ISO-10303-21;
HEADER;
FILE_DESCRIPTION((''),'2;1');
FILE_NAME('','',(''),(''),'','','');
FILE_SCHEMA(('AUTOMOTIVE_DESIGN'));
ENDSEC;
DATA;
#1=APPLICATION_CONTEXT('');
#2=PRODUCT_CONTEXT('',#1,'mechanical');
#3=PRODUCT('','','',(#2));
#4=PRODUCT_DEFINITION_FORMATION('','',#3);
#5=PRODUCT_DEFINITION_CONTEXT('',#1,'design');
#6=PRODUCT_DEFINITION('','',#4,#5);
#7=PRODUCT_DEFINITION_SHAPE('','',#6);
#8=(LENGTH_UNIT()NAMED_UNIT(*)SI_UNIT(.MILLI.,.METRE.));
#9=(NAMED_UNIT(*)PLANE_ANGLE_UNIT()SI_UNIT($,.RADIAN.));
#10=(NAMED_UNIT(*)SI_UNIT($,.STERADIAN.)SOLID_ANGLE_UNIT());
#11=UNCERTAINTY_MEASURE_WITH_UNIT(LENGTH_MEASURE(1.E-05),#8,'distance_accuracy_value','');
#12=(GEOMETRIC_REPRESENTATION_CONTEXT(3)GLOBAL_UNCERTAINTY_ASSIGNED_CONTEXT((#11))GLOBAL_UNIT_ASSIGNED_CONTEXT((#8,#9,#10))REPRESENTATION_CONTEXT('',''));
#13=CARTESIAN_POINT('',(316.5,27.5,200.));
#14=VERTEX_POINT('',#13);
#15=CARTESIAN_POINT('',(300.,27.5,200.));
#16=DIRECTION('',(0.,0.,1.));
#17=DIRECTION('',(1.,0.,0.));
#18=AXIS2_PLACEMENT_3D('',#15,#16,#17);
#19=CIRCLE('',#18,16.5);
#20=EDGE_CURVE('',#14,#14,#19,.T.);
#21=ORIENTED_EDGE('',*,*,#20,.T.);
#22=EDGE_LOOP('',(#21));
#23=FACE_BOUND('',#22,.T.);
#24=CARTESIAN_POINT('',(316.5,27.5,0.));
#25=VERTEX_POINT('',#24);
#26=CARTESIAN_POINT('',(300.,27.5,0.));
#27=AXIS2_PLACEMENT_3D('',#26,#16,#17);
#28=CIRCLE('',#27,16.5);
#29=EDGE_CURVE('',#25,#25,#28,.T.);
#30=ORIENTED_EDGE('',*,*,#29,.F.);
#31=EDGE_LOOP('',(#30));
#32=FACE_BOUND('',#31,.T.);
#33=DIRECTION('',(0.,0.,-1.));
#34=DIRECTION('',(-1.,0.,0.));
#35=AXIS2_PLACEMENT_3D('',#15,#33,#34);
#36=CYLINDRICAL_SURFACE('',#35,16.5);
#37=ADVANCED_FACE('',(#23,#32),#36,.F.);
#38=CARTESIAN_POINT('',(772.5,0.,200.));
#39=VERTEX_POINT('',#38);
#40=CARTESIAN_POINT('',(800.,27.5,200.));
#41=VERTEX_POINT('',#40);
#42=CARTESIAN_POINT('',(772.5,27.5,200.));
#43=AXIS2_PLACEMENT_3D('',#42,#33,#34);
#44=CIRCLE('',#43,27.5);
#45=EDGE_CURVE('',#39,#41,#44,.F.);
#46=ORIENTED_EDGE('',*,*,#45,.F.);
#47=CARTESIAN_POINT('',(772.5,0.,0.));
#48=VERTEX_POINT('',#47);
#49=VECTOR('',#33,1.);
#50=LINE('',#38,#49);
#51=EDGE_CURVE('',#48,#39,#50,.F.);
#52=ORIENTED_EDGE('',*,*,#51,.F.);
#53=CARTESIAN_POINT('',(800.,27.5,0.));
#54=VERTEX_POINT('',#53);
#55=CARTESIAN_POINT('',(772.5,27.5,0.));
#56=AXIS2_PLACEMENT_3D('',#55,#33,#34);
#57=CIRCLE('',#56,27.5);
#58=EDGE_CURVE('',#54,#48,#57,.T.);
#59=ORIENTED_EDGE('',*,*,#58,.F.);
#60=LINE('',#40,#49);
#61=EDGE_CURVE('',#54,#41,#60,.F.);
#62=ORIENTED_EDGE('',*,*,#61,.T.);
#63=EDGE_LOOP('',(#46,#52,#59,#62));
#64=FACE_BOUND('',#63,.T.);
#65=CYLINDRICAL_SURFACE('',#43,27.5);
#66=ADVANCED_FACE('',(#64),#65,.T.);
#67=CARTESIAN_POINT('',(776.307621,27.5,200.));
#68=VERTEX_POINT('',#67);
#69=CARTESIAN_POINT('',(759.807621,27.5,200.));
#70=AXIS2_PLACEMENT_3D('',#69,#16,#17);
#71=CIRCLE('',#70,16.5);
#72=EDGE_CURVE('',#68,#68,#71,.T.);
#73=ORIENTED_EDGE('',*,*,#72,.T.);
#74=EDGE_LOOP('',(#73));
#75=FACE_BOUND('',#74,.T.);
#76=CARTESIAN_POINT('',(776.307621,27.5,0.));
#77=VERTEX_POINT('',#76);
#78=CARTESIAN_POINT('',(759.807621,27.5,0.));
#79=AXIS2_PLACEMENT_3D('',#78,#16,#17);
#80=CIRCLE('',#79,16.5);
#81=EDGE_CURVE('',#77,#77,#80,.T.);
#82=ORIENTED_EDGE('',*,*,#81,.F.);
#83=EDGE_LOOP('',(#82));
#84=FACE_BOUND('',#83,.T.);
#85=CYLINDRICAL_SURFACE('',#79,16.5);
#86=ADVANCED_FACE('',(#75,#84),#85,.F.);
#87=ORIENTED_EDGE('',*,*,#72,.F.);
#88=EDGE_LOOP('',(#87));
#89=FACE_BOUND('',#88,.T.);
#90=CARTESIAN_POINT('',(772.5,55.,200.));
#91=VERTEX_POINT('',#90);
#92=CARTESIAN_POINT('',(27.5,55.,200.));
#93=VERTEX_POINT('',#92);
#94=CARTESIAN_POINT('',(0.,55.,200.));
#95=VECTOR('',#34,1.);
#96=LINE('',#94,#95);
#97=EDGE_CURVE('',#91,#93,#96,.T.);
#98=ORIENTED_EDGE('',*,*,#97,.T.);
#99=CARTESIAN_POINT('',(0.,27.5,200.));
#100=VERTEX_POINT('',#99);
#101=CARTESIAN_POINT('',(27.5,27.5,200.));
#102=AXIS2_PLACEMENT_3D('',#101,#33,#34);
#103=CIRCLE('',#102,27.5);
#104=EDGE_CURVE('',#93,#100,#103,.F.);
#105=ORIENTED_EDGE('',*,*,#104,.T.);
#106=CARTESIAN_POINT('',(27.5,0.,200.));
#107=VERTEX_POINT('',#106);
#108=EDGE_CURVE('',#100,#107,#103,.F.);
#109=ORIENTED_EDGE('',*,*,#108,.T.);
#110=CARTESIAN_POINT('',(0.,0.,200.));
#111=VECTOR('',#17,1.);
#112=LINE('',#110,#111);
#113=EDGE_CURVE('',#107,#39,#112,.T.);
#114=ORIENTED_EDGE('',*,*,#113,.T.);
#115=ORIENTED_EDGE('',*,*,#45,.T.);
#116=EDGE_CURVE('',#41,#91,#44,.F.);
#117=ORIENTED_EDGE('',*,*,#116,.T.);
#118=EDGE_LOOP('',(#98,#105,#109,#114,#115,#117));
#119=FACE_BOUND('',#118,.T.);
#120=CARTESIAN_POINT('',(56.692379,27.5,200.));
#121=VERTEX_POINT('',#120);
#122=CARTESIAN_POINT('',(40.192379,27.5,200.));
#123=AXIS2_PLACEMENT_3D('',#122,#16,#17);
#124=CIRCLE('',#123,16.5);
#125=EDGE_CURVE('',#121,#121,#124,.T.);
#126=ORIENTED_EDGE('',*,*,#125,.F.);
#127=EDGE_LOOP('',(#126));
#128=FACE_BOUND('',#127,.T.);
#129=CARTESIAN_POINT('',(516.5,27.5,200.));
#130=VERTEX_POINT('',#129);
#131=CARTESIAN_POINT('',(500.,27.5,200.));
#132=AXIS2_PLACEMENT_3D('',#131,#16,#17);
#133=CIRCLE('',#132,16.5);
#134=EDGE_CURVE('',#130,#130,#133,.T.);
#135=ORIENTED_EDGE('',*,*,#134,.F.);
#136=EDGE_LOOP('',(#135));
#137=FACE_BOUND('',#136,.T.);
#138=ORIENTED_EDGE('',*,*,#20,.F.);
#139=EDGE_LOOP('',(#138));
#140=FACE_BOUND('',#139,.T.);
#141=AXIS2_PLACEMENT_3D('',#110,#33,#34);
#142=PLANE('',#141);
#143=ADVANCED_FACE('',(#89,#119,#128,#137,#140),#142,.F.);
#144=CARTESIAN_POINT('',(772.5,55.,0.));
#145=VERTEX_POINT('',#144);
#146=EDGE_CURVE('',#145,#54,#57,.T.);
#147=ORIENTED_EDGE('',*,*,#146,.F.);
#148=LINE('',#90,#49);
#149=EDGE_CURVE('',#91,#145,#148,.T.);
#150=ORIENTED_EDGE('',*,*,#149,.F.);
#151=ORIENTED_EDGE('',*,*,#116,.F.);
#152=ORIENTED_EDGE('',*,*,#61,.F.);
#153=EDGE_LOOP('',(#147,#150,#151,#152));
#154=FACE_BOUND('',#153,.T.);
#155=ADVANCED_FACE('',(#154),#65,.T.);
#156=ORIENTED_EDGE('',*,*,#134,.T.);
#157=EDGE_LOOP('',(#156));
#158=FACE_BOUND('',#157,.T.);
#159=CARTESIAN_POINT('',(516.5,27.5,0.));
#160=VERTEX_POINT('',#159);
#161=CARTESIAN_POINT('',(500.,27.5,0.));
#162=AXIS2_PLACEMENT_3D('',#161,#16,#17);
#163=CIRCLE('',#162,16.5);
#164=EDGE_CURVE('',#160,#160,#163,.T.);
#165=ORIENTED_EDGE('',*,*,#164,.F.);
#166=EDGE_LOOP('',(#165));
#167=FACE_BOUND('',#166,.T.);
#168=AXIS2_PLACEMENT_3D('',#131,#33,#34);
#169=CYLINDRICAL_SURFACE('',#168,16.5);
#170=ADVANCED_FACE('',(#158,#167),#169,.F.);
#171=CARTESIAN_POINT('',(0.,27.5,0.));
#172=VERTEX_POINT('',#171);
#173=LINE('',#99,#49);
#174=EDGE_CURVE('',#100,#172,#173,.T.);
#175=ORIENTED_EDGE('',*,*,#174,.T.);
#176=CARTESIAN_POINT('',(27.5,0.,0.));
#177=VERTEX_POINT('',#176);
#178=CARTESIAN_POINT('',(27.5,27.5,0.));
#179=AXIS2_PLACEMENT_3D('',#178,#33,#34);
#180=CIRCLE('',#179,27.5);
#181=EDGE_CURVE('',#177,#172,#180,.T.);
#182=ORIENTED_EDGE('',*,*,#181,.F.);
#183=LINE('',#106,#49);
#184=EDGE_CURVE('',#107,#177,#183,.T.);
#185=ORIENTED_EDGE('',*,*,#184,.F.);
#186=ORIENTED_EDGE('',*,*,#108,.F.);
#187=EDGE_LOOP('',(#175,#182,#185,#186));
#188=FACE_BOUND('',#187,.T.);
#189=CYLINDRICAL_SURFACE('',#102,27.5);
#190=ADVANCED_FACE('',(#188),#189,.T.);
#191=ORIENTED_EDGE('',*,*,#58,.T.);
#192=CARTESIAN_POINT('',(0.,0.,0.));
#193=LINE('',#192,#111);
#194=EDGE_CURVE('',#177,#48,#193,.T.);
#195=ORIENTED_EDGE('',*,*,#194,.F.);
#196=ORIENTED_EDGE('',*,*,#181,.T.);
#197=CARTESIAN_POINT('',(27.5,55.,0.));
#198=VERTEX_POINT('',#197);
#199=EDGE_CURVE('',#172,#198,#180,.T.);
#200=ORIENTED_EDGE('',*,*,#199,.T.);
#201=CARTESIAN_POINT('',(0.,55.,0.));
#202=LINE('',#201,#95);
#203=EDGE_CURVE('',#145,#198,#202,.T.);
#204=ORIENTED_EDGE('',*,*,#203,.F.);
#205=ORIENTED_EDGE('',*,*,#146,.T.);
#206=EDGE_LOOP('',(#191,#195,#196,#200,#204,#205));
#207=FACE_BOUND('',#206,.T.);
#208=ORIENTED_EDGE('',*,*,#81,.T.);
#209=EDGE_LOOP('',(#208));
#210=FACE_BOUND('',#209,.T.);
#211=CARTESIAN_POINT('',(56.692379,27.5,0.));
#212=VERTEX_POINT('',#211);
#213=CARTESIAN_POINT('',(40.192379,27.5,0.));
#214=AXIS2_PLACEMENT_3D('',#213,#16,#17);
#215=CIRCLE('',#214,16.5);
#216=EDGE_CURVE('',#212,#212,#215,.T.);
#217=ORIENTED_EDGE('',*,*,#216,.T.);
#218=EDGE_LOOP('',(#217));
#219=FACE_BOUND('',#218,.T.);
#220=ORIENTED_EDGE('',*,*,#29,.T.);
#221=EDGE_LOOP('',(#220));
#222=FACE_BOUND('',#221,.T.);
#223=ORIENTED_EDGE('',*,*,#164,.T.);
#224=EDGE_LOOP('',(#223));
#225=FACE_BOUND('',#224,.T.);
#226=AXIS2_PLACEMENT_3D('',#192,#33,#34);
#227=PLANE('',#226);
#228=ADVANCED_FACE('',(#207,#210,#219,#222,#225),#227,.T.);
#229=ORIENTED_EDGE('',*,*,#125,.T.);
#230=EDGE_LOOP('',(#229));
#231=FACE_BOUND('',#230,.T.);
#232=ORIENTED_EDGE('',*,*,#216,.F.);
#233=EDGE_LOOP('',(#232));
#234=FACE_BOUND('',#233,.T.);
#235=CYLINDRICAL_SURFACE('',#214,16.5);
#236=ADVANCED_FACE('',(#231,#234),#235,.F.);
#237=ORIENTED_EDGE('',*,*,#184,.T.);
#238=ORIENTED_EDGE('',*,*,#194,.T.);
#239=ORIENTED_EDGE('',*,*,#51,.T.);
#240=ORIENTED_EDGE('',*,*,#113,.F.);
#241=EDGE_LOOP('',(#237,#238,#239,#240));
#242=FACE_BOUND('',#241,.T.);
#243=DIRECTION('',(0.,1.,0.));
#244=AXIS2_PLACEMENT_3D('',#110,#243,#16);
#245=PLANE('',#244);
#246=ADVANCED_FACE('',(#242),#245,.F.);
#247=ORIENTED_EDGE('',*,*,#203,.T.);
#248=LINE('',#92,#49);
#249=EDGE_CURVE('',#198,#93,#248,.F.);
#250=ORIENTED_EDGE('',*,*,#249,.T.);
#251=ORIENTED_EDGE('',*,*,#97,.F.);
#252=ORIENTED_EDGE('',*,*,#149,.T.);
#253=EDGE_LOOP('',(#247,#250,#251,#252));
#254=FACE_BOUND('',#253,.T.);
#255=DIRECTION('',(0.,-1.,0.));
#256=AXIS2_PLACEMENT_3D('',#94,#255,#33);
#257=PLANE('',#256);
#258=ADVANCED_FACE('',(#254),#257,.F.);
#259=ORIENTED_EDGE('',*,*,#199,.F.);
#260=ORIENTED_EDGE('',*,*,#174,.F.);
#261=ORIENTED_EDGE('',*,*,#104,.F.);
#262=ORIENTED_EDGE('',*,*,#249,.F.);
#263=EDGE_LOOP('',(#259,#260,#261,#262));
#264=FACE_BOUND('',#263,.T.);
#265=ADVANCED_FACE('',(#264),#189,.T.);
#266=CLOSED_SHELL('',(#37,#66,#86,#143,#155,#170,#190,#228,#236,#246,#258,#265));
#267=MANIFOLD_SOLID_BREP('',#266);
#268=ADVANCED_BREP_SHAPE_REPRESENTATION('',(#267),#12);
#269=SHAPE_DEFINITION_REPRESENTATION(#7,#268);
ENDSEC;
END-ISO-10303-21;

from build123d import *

# Parameters (mm, degrees)
SKETCH_1_W          = 800
SKETCH_1_H          = 55
SKETCH_1_R          = 16.5
EXTRUDE_1_DEPTH     = 200
SKETCH_2_R          = 16.5
CUT_EXTRUDE_1_DEPTH = 827.453265466
FILLET_1_R          = 27.5


with BuildPart() as part:
    # 草图1 → 凸台-拉伸1 (new body)
    with BuildSketch(Plane.XY):
        with Locations((400, 27.5)):
            Rectangle(SKETCH_1_W, SKETCH_1_H)
        with Locations((300, 27.5)):
            Circle(SKETCH_1_R, mode=Mode.SUBTRACT)
        with Locations((500, 27.5)):
            Circle(SKETCH_1_R, mode=Mode.SUBTRACT)
    extrude(amount=EXTRUDE_1_DEPTH)

    # 草图2 → 切除-拉伸1 (cut, through all)
    with BuildSketch(Plane.XY.offset(200)):
        with Locations((759.807621135, 27.5)):
            Circle(SKETCH_2_R)
        with Locations((40.192378865, 27.5)):
            Circle(SKETCH_2_R)
    extrude(amount=-CUT_EXTRUDE_1_DEPTH, mode=Mode.SUBTRACT)

    # 圆角1
    fillet_1_edges = [part.edges().sort_by_distance(p)[0] for p in [
        (0, 0, 100),
        (0, 55, 100),
        (800, 0, 100),
        (800, 55, 100),
    ]]
    fillet(fillet_1_edges, radius=FILLET_1_R - 0.0001)  # a hair under: the kernel refuses the full size


solid = part.part
